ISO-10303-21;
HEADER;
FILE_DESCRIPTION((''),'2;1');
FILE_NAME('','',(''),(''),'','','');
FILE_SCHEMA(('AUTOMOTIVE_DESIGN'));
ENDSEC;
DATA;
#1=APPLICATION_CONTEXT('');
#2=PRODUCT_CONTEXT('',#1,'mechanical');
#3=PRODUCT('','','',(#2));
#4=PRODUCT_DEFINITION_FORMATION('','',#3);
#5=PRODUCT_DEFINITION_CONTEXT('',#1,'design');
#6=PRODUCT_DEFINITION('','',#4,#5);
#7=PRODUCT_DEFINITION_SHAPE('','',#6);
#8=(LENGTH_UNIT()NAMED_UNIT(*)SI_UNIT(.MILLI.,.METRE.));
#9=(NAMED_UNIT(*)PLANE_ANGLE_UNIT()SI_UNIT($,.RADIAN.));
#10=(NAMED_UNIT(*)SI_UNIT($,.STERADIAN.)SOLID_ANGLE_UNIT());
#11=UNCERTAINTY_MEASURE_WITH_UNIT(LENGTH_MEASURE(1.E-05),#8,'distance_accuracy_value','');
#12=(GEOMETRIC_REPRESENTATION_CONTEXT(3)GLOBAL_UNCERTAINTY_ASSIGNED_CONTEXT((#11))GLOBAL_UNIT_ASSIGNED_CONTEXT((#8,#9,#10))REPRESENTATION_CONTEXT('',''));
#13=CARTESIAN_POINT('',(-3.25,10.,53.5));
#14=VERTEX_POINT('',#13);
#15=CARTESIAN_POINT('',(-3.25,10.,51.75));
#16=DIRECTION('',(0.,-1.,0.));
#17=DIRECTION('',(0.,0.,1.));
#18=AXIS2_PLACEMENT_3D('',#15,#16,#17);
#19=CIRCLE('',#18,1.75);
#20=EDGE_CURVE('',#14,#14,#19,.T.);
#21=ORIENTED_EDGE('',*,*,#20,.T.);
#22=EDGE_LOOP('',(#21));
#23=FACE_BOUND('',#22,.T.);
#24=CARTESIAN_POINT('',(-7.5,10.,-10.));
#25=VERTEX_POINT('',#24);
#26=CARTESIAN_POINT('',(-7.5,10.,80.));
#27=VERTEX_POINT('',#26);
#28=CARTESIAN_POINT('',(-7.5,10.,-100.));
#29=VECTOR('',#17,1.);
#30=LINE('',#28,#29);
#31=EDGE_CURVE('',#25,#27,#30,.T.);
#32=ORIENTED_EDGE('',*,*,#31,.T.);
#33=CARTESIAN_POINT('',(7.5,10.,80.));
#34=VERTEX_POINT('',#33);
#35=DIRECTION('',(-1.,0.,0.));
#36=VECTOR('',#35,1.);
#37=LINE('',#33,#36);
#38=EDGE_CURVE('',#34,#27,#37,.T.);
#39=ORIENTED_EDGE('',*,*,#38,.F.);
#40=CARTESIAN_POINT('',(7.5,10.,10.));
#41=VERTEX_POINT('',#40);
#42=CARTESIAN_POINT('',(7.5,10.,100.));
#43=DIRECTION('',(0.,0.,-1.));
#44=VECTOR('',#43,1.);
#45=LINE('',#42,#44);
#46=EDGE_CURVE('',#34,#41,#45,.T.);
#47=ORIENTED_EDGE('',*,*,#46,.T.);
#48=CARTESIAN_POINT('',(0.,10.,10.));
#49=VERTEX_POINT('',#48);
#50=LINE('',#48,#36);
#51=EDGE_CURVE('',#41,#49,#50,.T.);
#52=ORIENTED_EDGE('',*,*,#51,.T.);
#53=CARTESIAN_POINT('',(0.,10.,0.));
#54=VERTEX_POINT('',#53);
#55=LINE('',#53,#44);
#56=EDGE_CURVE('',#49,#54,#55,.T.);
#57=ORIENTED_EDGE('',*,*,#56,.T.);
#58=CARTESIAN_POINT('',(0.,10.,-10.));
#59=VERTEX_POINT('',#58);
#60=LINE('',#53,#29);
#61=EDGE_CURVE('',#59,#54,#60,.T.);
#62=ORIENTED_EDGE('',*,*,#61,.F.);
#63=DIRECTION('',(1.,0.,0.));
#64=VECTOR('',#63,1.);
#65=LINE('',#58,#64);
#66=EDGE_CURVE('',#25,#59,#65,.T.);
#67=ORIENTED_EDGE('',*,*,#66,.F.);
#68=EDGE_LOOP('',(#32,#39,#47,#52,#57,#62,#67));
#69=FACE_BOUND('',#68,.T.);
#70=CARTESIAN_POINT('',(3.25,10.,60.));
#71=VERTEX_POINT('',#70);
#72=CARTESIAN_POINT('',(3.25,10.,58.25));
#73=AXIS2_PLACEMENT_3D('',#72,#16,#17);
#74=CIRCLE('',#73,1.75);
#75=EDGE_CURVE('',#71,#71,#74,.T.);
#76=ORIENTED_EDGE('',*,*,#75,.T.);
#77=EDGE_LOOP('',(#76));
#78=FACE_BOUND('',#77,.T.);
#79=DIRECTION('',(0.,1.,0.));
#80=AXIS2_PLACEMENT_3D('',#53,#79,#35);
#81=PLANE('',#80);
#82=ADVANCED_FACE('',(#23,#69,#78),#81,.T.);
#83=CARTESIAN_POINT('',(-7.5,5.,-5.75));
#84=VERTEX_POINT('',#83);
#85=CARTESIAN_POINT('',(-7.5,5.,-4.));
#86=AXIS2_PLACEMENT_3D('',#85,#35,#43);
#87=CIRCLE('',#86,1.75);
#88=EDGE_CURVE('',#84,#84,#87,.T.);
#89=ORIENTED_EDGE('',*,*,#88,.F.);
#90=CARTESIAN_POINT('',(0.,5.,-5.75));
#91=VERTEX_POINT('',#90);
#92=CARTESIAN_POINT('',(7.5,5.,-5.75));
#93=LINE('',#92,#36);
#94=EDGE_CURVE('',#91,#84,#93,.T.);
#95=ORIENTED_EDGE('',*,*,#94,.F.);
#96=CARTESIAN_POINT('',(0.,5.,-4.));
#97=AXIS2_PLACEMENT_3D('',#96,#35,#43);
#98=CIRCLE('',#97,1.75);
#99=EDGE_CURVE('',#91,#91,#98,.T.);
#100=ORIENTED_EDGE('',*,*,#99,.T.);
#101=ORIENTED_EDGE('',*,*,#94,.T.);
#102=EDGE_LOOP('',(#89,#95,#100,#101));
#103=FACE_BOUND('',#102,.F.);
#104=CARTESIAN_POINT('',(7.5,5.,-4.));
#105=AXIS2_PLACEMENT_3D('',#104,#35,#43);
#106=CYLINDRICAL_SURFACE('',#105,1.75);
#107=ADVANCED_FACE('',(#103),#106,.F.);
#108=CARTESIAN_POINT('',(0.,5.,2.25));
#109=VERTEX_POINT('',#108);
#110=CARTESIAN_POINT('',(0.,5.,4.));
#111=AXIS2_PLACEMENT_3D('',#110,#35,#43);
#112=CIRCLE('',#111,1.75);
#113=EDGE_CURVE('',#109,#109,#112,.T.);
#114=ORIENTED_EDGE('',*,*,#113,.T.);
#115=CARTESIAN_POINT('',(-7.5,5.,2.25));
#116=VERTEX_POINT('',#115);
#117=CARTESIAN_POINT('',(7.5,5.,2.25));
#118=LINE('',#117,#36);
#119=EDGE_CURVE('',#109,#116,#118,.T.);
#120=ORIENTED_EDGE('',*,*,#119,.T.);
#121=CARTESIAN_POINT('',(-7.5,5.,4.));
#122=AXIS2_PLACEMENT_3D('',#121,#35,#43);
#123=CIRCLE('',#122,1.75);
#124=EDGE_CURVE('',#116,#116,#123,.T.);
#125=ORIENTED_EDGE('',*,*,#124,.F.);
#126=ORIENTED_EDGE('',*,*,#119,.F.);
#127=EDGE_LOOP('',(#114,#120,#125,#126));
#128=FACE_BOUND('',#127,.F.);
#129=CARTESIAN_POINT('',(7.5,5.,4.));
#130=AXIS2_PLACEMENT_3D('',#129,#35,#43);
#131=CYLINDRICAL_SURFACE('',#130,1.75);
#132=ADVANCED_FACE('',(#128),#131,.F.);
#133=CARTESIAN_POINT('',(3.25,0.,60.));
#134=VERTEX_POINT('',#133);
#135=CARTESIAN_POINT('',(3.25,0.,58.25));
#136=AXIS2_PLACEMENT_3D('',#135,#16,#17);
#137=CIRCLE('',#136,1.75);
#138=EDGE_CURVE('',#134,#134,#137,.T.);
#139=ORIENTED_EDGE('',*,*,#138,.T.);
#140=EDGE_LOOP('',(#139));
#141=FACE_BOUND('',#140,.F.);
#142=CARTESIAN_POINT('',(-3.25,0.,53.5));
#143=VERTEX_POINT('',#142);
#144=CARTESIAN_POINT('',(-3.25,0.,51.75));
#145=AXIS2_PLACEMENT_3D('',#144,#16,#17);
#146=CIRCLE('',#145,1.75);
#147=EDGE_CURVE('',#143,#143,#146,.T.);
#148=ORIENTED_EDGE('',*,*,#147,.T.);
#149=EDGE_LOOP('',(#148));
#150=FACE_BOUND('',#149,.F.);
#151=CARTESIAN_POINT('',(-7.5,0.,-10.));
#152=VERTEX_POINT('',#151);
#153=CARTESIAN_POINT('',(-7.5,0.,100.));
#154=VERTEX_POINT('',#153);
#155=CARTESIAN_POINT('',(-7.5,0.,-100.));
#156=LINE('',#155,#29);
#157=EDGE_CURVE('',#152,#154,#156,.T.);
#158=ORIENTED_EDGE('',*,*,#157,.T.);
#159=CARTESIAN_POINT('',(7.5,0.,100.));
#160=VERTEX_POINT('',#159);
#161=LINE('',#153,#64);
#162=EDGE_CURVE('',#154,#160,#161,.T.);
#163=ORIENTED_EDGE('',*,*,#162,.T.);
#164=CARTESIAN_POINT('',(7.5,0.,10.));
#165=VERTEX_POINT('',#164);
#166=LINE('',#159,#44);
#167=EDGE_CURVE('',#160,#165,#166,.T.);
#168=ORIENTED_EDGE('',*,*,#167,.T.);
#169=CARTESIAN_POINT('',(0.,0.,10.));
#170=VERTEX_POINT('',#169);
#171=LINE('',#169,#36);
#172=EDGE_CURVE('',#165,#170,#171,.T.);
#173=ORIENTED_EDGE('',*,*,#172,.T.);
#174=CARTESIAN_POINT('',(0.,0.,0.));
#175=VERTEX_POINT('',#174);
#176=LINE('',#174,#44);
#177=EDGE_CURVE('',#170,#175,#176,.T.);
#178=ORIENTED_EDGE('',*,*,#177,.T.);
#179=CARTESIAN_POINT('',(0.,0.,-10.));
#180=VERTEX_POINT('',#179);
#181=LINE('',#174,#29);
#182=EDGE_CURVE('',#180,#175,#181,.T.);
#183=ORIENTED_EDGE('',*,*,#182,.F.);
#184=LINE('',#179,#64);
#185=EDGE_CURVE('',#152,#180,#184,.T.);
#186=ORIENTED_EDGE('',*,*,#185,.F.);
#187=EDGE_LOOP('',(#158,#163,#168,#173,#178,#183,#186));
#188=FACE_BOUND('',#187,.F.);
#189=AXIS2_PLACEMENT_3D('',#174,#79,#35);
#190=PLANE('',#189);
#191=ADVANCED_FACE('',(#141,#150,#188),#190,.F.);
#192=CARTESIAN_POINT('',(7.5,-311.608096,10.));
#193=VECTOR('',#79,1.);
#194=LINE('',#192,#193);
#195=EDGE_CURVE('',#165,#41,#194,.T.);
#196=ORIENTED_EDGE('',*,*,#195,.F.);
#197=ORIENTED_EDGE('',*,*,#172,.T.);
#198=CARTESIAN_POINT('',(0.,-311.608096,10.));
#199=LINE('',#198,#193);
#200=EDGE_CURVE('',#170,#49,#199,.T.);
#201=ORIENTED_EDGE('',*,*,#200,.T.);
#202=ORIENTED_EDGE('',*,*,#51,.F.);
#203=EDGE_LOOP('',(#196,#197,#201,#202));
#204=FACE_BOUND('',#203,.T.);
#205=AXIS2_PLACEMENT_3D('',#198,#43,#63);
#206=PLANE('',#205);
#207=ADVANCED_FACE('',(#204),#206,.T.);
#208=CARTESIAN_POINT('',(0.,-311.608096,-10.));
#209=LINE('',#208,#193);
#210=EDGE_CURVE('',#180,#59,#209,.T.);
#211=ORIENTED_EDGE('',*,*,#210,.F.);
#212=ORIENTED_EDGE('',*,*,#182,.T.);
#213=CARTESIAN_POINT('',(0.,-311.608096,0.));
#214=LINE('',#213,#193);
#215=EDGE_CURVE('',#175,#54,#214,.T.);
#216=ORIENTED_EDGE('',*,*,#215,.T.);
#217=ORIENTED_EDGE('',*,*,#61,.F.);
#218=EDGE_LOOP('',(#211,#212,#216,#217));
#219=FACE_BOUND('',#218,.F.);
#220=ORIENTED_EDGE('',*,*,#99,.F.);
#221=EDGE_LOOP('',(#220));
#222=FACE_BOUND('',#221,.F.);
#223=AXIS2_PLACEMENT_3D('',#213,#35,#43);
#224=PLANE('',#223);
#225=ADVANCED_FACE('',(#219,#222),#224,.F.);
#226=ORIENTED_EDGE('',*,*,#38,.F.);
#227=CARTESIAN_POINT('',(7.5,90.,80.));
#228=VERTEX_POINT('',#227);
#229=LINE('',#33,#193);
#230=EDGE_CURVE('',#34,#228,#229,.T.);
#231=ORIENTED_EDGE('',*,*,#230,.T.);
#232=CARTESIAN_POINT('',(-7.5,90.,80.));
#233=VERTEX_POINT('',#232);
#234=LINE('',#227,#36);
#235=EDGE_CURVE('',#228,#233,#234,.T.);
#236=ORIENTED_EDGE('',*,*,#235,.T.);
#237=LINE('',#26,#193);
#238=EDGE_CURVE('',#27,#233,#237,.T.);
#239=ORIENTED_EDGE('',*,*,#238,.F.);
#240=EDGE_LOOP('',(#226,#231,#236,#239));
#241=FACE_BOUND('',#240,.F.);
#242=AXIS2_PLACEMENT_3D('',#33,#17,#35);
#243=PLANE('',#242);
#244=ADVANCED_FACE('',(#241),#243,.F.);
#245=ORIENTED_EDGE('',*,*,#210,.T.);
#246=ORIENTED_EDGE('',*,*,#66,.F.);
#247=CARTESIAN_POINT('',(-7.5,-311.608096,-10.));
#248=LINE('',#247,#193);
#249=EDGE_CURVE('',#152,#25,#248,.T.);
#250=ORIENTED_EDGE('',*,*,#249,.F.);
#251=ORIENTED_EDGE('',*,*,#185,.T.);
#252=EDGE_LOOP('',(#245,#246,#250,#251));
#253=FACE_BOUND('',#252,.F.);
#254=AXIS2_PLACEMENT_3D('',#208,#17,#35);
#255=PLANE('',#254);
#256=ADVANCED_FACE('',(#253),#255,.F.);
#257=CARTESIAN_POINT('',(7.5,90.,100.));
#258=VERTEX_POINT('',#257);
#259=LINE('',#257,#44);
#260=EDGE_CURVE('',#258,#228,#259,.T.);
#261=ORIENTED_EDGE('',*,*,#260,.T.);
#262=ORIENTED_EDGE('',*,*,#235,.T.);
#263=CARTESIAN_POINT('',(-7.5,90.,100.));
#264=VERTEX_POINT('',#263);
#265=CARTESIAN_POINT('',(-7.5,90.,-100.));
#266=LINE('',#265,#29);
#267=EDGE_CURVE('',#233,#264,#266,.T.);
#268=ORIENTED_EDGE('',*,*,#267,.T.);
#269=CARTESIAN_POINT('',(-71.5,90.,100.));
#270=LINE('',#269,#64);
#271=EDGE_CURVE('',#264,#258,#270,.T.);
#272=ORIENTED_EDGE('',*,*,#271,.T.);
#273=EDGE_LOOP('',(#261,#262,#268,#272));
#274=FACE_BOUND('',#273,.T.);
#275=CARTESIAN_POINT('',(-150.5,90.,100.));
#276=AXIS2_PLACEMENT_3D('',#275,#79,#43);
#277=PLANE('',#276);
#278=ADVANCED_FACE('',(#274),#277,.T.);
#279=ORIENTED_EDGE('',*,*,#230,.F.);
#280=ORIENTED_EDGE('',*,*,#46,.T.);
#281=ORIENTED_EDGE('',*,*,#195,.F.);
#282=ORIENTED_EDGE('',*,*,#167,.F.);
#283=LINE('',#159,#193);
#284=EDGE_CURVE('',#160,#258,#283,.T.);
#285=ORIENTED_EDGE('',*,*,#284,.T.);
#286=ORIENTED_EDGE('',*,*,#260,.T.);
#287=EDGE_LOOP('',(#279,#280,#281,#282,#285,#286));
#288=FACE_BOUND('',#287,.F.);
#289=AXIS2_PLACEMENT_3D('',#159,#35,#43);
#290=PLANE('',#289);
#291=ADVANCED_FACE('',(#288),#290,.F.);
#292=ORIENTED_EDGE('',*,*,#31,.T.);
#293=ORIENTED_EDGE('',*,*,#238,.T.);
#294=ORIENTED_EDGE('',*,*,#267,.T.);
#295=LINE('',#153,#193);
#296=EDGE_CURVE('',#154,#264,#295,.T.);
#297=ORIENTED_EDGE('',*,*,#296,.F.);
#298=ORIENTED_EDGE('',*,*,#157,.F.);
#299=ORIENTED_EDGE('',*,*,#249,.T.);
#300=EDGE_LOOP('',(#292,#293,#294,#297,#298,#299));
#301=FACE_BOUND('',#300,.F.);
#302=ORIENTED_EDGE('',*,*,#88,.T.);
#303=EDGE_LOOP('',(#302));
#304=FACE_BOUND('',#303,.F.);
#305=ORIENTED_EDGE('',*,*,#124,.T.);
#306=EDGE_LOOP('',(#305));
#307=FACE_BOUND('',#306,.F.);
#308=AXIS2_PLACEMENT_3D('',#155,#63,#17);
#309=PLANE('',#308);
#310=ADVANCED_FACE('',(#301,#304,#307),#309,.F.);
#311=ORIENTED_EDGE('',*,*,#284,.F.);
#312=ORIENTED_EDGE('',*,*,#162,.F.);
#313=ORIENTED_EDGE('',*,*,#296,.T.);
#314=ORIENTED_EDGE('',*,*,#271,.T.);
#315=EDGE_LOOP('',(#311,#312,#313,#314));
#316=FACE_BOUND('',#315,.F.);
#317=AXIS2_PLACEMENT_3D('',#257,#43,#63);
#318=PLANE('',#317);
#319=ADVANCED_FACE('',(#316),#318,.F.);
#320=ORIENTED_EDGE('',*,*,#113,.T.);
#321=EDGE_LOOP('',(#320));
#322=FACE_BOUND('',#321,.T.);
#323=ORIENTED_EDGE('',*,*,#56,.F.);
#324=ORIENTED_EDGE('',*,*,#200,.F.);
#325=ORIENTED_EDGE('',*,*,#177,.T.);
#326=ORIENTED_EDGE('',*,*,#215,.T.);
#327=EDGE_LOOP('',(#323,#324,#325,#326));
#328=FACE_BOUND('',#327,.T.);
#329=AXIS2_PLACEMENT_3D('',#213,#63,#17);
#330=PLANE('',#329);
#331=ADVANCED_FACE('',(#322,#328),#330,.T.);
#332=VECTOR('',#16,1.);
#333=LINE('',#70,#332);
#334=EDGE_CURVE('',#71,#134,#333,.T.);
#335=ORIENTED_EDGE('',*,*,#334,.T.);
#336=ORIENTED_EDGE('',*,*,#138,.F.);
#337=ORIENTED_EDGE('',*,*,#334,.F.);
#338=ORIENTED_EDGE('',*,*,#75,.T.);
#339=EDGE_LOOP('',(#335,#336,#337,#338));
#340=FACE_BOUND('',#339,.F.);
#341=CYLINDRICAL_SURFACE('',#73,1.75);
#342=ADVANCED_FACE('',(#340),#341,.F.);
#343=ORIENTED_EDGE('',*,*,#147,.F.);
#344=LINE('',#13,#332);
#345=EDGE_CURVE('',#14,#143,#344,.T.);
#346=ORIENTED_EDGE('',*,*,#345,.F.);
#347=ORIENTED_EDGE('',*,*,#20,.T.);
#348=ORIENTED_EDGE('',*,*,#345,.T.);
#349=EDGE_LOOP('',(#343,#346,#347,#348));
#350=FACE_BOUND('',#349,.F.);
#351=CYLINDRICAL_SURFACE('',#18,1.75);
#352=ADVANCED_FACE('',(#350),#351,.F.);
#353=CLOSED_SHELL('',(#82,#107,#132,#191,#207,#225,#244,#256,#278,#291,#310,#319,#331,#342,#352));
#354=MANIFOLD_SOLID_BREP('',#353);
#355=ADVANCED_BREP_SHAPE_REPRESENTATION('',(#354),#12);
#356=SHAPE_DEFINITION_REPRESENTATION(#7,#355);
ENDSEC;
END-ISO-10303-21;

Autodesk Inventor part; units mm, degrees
ref_plane "YZ Plane" through (0, 0, 0) normal (1, 0, 0) x (0, 1, 0)
ref_plane "XZ Plane" through (0, 0, 0) normal (0, 1, 0) x (-1, 0, 0)
ref_plane "XY Plane" through (0, 0, 0) normal (0, 0, 1) x (1, 0, 0)
sketch "Boceto2" plane through (0, 0, 0) normal (0, 1, 0) x (-1, 0, 0)
  line L0 (7.5, 100) -> (-7.5, 100)
  line L1 (-7.5, 100) -> (-7.5, -100)
  line L2 (-7.5, -100) -> (7.5, -100)
  line L3 (7.5, -100) -> (7.5, 100)
  line L4 (7.5, 100) -> (-7.5, -100) construction
  line L5 (-7.5, 100) -> (7.5, -100) construction
  point P0 (0, 0)
  dimension "d7" = 15
  dimension "d8" = 200
extrude "Extrusión1" add sketch "Boceto2" along normal blind 10
sketch "Boceto3" plane through (0, 10, 0) normal (0, 1, 0) x (1, 0, 0)
  circle A0 centre (3.25, 58.25) radius 1.75
  line L0 (5, 50) -> (-5, 50)
  line L1 (-5, 50) -> (-5, 60)
  line L2 (-5, 60) -> (5, 60)
  line L3 (5, 60) -> (5, 50)
  line L4 (5, 50) -> (-5, 60) construction
  line L5 (-5, 50) -> (5, 60) construction
  circle A1 centre (-3.25, 51.75) radius 1.75
  line L6 (7.5, 100) -> (-7.5, 100) projected
  line L7 (-7.5, 0) -> (3.408, 0)
  line L8 (5, -60) -> (5, -50)
  line L9 (-5, -60) -> (5, -60)
  line L10 (5, -50) -> (-5, -50)
  line L11 (-5, -50) -> (-5, -60)
  line L12 (-5, -50) -> (5, -60) construction
  circle A2 centre (-3.25, -51.75) radius 1.75
  line L13 (5, -50) -> (-5, -60) construction
  circle A3 centre (3.25, -58.25) radius 1.75
  line L14 (-7.5, -100) -> (7.5, -100) projected
  point P0 (0, 0)
  point P1 (-5, 55)
  point P2 (0, 100)
  point P3 (-5, -55)
  dimension "d11" = 3.5
  dimension "d12" = 1.75
  dimension "d13" = 1.75
  dimension "d14" = 1.75
  dimension "d15" = 1.75
  dimension "d16" = 10
  dimension "d17" = 10
  dimension "d19" = 40
  dimension "d81" = 40
hole "Agujero1" at (3.25, 10, 58.25) at (-3.25, 10, 51.75) at (3.25, 10, -58.25) at (-3.25, 10, -51.75) direction (0, -1, 0) diameter 3.5 end through all
sketch "Boceto4" plane through (0, 10, 0) normal (0, 1, 0) x (1, 0, 0)
  line L0 (-7.5, 100) -> (-7.5, -100) projected
  line L1 (-7.5, -100) -> (7.5, -100)
  line L2 (7.5, -100) -> (7.5, -80)
  line L3 (7.5, -80) -> (-7.5, -80)
  line L4 (-7.5, -80) -> (-7.5, -100)
  line L5 (-7.5, 0) -> (1.0116, 0)
  line L6 (-7.5, -100) -> (-7.5, 100)
  line L7 (-7.5, 100) -> (7.5, 100)
  line L8 (7.5, 100) -> (7.5, 80)
  line L9 (7.5, 80) -> (-7.5, 80)
  line L10 (-7.5, 80) -> (-7.5, 100)
  point P0 (0, 0)
  point P1 (-7.5, -80)
  point P2 (-7.5, 80)
  dimension "d27" = 15
  dimension "d28" = 20
extrude "Extrusión2" add sketch "Boceto4" along normal blind 80
sketch "Boceto5" plane through (0, 90, 0) normal (0, 1, 0) x (1, 0, 0)
  line L0 (-7.5, -100) -> (7.5, -100) projected
  line L1 (-7.5, -100) -> (49.5, -100)
  line L2 (49.5, -100) -> (49.5, 100)
  line L3 (49.5, 100) -> (-7.5, 100)
  line L4 (-7.5, 100) -> (-7.5, -100)
  line L5 (49.5, -100) -> (-150.5, -100)
  line L6 (-150.5, -100) -> (-150.5, 100)
  line L7 (-150.5, 100) -> (49.5, 100)
  line L8 (49.5, 100) -> (49.5, -100)
  point P0 (0, 0)
  point P1 (-7.5, 100)
  dimension "d31" = 57
  dimension "d32" = 200
  dimension "d75" = 200
extrude "Extrusión3" add sketch "Boceto5" along normal blind 110
sketch "Boceto6" plane through (0, 200, 0) normal (0, 1, 0) x (1, 0, 0)
  line L0 (49.5, 100) -> (7.5, 100) projected
  line L1 (49.5, 100) -> (29.5, 100)
  line L2 (29.5, 100) -> (29.5, 80)
  line L3 (7.5, -100) -> (49.5, -100) projected
  line L4 (28.5, -100) -> (28.5, -80)
  line L5 (-150.5, 100) -> (-150.5, -100) projected
  line L6 (29.5, 80) -> (-150.5, 80)
  line L7 (-150.5, 80) -> (-150.5, -80)
  line L8 (-150.5, -80) -> (29.5, -80)
  line L9 (29.5, -80) -> (29.5, 80)
  line L10 (-150.5, -100) -> (49.5, -100) projected
  point P0 (7.5, 80)
  point P1 (-50.5, -100)
  dimension "d36" = 20
  dimension "d37" = 20
  dimension "d38" = 20
  dimension "d77" = 20
extrude "Extrusión4" cut sketch "Boceto6" against normal blind 90 contours L8 L5 L6 L9
sketch "Boceto7" plane through (-150.5, 90, -100) normal (-1, 0, 0) x (0, 0, 1)
  line L0 (0, 110) -> (20, 110) projected
  line L1 (20, 110) -> (10, 110)
  line L2 (10, 110) -> (10, 20)
  line L3 (10, 20) -> (20, 20)
  line L4 (20, 20) -> (20, 110)
  line L5 (180, 110) -> (180, 20) projected
  line L6 (180, 110) -> (190, 110)
  line L7 (190, 110) -> (190, 20)
  line L8 (190, 20) -> (180, 20)
  line L9 (180, 20) -> (180, 110)
  line L10 (200, 0) -> (200, 110) projected
  line L11 (0, 0) -> (0, 110) projected
  line L12 (0, 110) -> (10, 110)
  line L13 (10, 110) -> (10, 20)
  line L14 (10, 20) -> (0, 20)
  line L15 (0, 20) -> (0, 110)
  line L16 (200, 110) -> (0, 110) projected
  line L17 (200, 110) -> (190, 110)
  line L18 (190, 110) -> (190, 20)
  line L19 (190, 20) -> (200, 20)
  line L20 (200, 20) -> (200, 110)
  point P0 (100, -90)
  dimension "d63" = 10
  dimension "d65" = 10
  dimension "d76" = 10
extrude "Extrusión5" cut sketch "Boceto7" against normal blind 30 contours L0 L4 L3 L2 | L6 L7 L8 L5
sketch "Boceto8" plane through (-7.5, 0, 100) normal (0, 0, 1) x (1, 0, 0)
  line L0 (-113, 110) -> (-113, 200) projected
  line L1 (-113, 200) -> (-113, 110)
  circle A0 centre (-124.75, 183.25) radius 1.75
  line L2 (-123, 175) -> (-133, 175)
  line L3 (-133, 175) -> (-133, 185)
  line L4 (-133, 185) -> (-123, 185)
  line L5 (-123, 185) -> (-123, 175)
  line L6 (-123, 175) -> (-133, 185) construction
  line L7 (-133, 175) -> (-123, 185) construction
  circle A1 centre (-131.25, 176.75) radius 1.75
  line L8 (-143, 200) -> (57, 200) projected
  line L9 (-143, 90) -> (-143, 200) projected
  line L10 (-113, 155) -> (-128, 155)
  line L11 (-123, 125) -> (-123, 135)
  line L12 (-133, 125) -> (-123, 125)
  line L13 (-123, 135) -> (-133, 125) construction
  line L14 (-123, 135) -> (-133, 135)
  line L15 (-133, 135) -> (-123, 125) construction
  circle A2 centre (-131.25, 133.25) radius 1.75
  line L16 (-133, 135) -> (-133, 125)
  circle A3 centre (-124.75, 126.75) radius 1.75
  line L17 (-143, 110) -> (-113, 110) projected
  point P0 (7.5, 0)
  point P1 (-133, 180)
  point P2 (-123, 180)
  point P3 (-133, 130)
  point P4 (-123, 130)
  dimension "d45" = 3.5
  dimension "d46" = 1.75
  dimension "d47" = 1.75
  dimension "d48" = 1.75
  dimension "d49" = 1.75
  dimension "d50" = 10
  dimension "d51" = 10
  dimension "d52" = 15
  dimension "d53" = 10
  dimension "d54" = 10
  dimension "d55" = 15
hole "Agujero2" at (-132.25, 183.25, 100) at (-138.75, 176.75, 100) at (-138.75, 133.25, 100) at (-132.25, 126.75, 100) direction (0, 0, -1) diameter 3.5 end through all
ref_plane "Plano de trabajo1" through (-150.5, 90, 100) normal (0, -1, 0) x (1, 0, 0)
split "Dividir1" plane through (-150.5, 90, 100) removes the side toward (0, 1, 0)
ref_plane "Plano de trabajo2" through (-7.5, 10, 0) normal (0, 0, 1) x (1, 0, 0)
sketch "Boceto9" plane through (7.5, 0, 100) normal (1, 0, 0) x (0, 0, -1)
  circle A0 centre (96, 5) radius 1.75
  circle A1 centre (104, 5) radius 1.75
  point P0 (100, 0)
  point P1 (100, 0)
  dimension "d89" = 3.5
hole "Agujero3" at (7.5, 5, 4) at (7.5, 5, -4) direction (-1, 0, 0) diameter 3.5 end through all
sketch "Boceto10" plane through (0, 10, 0) normal (0, 1, 0) x (1, 0, 0)
  line L0 (0, 0) -> (0, -10)
  line L1 (0, -10) -> (7.5, -10)
  line L2 (7.5, -80) -> (7.5, 80) projected
  line L3 (0, 0) -> (0, 10)
  line L4 (0, 10) -> (-7.5, 10)
  line L5 (-7.5, 80) -> (-7.5, -80) projected
  dimension "d97" = 10
  dimension "d98" = 10
split body "Dividir2" sketch "Boceto10" result one side removed curves L1 L0 L3 L4 removed pieces at (7, 33.3333, -93.3333)
properties part number "container_front_foot_1"
